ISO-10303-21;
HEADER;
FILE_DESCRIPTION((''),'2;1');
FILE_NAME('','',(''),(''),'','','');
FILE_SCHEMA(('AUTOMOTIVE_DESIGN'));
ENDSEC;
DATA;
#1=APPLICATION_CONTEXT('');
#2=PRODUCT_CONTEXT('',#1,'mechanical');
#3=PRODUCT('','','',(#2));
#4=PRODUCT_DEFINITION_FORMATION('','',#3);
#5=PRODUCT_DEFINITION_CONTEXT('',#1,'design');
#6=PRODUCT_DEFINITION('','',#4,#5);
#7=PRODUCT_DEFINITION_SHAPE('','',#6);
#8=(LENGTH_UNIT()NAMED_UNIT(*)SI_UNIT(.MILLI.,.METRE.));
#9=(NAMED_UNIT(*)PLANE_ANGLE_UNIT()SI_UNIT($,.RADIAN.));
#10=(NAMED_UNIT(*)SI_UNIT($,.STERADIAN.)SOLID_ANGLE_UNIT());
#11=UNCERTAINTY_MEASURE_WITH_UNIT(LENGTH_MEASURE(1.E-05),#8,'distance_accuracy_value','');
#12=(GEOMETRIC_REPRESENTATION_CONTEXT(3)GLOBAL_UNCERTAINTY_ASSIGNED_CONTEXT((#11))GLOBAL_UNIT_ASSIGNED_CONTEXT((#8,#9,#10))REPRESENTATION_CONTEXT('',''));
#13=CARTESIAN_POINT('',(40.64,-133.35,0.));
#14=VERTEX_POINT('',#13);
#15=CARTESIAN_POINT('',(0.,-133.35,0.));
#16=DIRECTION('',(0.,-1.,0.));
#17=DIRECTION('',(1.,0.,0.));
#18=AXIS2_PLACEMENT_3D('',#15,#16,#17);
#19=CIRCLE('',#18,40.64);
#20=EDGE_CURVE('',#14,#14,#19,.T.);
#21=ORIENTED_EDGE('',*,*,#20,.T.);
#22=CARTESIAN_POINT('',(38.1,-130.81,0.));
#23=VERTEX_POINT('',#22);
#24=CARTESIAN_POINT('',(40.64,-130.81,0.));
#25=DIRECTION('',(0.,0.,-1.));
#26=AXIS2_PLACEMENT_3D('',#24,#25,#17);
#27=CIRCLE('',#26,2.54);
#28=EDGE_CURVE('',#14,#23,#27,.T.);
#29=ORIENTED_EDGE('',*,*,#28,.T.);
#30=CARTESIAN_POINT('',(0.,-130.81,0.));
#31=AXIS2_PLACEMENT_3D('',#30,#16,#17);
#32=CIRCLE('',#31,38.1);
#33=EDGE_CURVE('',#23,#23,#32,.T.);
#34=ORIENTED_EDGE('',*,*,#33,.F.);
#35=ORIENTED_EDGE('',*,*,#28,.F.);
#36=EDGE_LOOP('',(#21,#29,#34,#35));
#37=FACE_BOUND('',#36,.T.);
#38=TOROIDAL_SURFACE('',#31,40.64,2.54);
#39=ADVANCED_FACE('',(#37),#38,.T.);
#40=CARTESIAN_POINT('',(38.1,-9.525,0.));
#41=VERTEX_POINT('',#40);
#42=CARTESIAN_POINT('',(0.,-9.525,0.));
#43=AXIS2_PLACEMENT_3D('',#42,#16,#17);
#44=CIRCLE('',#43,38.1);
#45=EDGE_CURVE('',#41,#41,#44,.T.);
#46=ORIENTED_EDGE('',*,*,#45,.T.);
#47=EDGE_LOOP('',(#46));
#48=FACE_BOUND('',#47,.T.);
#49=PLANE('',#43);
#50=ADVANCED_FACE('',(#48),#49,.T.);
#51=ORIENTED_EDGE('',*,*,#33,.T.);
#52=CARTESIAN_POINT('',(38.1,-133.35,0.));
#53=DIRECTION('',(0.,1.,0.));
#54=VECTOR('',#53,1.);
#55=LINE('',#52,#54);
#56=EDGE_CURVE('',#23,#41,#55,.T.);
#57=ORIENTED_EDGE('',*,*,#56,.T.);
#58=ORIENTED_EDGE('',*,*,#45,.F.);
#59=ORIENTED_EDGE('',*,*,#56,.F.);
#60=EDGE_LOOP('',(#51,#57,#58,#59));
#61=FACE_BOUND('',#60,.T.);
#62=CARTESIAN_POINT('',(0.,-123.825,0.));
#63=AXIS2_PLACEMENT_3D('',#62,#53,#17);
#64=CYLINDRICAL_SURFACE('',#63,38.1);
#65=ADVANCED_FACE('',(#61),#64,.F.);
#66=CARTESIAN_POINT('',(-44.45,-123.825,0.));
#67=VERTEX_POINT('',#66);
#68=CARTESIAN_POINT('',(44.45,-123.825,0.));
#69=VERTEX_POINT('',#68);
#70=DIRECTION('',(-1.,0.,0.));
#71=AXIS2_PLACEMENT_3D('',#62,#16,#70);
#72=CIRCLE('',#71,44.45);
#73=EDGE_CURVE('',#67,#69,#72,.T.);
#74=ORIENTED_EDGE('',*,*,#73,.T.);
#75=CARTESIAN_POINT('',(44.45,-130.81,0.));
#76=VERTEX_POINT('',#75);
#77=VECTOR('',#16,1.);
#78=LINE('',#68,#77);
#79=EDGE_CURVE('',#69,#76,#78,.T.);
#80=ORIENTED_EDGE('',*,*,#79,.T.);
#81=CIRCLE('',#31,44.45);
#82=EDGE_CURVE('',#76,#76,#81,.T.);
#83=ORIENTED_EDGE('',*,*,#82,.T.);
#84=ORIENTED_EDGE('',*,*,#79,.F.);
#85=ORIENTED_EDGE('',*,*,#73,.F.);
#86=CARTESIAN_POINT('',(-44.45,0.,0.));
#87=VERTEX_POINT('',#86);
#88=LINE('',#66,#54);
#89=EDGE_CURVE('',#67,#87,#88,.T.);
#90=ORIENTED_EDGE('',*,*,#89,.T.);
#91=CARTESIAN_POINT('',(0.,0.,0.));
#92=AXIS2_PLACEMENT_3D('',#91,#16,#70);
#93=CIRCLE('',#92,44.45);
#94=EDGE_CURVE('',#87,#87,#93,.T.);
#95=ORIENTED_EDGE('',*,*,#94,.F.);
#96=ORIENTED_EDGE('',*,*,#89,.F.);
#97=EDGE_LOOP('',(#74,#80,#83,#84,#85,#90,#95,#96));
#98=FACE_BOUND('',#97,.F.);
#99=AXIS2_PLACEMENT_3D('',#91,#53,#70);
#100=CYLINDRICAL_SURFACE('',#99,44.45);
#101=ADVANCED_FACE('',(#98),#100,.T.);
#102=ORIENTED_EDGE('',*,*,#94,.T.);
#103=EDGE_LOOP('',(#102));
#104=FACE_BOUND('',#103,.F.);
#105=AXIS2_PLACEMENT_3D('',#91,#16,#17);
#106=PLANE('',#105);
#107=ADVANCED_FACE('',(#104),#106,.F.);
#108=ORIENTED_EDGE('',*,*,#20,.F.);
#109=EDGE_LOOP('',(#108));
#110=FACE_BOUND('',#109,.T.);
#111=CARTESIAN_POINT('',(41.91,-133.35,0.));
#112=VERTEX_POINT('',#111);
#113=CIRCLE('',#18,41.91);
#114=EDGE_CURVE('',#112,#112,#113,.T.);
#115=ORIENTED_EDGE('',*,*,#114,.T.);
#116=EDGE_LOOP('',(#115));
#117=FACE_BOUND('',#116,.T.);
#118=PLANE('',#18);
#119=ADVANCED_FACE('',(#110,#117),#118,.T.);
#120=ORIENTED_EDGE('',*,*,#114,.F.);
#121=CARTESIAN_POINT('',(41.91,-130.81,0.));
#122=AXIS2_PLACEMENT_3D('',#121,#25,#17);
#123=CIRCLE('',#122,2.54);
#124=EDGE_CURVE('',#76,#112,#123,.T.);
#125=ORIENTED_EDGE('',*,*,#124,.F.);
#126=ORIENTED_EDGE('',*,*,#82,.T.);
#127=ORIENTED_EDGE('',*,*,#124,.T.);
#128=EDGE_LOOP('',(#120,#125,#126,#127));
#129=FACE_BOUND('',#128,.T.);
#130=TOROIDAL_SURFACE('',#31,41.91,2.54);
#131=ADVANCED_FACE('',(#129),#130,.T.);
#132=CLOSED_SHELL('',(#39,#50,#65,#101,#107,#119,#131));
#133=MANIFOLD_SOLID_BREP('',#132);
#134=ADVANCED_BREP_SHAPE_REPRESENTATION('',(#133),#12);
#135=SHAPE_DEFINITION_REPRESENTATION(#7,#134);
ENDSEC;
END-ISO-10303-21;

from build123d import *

# Parameters (mm, degrees)
F1_DEPTH    = 123.825
F2_DEPTH    = 25.4
F1_FACE_R   = 44.45
F1_FACE_R_2 = 38.1
F3_DEPTH    = 9.525
F4_R        = 2.54


with BuildPart() as f1:
    # F0 (on Front) → F1 (new body)
    with BuildSketch(Plane.XZ):
        with BuildLine():
            ThreePointArc((44.45, 0), (0, 44.45), (-44.45, 0))
            ThreePointArc((-44.45, 0), (0, -44.45), (44.45, 0))
        make_face()
        with BuildLine():
            ThreePointArc((-38.1, 0), (0, 38.1), (38.1, 0))
            ThreePointArc((38.1, 0), (0, -38.1), (-38.1, 0))
        make_face(mode=Mode.SUBTRACT)
    extrude(amount=F1_DEPTH)

    # F0 (on Front) → F2 (join)
    with BuildSketch(Plane.XZ):
        with BuildLine():
            ThreePointArc((44.45, 0), (0, 44.45), (-44.45, 0))
            ThreePointArc((-44.45, 0), (0, -44.45), (44.45, 0))
        make_face()
        with BuildLine():
            ThreePointArc((-38.1, 0), (0, 38.1), (38.1, 0))
            ThreePointArc((38.1, 0), (0, -38.1), (-38.1, 0))
        make_face(mode=Mode.SUBTRACT)
    extrude(amount=F2_DEPTH)

    # F0 (on Front) + F1_face (on face) → F3 (join)
    with BuildSketch(Plane.XZ):
        with BuildLine():
            ThreePointArc((-38.1, 0), (0, -38.1), (38.1, 0))
            ThreePointArc((38.1, 0), (0, 38.1), (-38.1, 0))
        make_face()
    with BuildSketch(Plane.XZ.offset(123.825)):
        Circle(F1_FACE_R)
        Circle(F1_FACE_R_2, mode=Mode.SUBTRACT)
    extrude(amount=F3_DEPTH)

    # F4
    f4_edges = [f1.edges().sort_by_distance(p)[0] for p in [
        (-44.45, -133.35, 0),
        (-38.1, -133.35, 0),
    ]]
    fillet(f4_edges, radius=F4_R)


solid = f1.part
